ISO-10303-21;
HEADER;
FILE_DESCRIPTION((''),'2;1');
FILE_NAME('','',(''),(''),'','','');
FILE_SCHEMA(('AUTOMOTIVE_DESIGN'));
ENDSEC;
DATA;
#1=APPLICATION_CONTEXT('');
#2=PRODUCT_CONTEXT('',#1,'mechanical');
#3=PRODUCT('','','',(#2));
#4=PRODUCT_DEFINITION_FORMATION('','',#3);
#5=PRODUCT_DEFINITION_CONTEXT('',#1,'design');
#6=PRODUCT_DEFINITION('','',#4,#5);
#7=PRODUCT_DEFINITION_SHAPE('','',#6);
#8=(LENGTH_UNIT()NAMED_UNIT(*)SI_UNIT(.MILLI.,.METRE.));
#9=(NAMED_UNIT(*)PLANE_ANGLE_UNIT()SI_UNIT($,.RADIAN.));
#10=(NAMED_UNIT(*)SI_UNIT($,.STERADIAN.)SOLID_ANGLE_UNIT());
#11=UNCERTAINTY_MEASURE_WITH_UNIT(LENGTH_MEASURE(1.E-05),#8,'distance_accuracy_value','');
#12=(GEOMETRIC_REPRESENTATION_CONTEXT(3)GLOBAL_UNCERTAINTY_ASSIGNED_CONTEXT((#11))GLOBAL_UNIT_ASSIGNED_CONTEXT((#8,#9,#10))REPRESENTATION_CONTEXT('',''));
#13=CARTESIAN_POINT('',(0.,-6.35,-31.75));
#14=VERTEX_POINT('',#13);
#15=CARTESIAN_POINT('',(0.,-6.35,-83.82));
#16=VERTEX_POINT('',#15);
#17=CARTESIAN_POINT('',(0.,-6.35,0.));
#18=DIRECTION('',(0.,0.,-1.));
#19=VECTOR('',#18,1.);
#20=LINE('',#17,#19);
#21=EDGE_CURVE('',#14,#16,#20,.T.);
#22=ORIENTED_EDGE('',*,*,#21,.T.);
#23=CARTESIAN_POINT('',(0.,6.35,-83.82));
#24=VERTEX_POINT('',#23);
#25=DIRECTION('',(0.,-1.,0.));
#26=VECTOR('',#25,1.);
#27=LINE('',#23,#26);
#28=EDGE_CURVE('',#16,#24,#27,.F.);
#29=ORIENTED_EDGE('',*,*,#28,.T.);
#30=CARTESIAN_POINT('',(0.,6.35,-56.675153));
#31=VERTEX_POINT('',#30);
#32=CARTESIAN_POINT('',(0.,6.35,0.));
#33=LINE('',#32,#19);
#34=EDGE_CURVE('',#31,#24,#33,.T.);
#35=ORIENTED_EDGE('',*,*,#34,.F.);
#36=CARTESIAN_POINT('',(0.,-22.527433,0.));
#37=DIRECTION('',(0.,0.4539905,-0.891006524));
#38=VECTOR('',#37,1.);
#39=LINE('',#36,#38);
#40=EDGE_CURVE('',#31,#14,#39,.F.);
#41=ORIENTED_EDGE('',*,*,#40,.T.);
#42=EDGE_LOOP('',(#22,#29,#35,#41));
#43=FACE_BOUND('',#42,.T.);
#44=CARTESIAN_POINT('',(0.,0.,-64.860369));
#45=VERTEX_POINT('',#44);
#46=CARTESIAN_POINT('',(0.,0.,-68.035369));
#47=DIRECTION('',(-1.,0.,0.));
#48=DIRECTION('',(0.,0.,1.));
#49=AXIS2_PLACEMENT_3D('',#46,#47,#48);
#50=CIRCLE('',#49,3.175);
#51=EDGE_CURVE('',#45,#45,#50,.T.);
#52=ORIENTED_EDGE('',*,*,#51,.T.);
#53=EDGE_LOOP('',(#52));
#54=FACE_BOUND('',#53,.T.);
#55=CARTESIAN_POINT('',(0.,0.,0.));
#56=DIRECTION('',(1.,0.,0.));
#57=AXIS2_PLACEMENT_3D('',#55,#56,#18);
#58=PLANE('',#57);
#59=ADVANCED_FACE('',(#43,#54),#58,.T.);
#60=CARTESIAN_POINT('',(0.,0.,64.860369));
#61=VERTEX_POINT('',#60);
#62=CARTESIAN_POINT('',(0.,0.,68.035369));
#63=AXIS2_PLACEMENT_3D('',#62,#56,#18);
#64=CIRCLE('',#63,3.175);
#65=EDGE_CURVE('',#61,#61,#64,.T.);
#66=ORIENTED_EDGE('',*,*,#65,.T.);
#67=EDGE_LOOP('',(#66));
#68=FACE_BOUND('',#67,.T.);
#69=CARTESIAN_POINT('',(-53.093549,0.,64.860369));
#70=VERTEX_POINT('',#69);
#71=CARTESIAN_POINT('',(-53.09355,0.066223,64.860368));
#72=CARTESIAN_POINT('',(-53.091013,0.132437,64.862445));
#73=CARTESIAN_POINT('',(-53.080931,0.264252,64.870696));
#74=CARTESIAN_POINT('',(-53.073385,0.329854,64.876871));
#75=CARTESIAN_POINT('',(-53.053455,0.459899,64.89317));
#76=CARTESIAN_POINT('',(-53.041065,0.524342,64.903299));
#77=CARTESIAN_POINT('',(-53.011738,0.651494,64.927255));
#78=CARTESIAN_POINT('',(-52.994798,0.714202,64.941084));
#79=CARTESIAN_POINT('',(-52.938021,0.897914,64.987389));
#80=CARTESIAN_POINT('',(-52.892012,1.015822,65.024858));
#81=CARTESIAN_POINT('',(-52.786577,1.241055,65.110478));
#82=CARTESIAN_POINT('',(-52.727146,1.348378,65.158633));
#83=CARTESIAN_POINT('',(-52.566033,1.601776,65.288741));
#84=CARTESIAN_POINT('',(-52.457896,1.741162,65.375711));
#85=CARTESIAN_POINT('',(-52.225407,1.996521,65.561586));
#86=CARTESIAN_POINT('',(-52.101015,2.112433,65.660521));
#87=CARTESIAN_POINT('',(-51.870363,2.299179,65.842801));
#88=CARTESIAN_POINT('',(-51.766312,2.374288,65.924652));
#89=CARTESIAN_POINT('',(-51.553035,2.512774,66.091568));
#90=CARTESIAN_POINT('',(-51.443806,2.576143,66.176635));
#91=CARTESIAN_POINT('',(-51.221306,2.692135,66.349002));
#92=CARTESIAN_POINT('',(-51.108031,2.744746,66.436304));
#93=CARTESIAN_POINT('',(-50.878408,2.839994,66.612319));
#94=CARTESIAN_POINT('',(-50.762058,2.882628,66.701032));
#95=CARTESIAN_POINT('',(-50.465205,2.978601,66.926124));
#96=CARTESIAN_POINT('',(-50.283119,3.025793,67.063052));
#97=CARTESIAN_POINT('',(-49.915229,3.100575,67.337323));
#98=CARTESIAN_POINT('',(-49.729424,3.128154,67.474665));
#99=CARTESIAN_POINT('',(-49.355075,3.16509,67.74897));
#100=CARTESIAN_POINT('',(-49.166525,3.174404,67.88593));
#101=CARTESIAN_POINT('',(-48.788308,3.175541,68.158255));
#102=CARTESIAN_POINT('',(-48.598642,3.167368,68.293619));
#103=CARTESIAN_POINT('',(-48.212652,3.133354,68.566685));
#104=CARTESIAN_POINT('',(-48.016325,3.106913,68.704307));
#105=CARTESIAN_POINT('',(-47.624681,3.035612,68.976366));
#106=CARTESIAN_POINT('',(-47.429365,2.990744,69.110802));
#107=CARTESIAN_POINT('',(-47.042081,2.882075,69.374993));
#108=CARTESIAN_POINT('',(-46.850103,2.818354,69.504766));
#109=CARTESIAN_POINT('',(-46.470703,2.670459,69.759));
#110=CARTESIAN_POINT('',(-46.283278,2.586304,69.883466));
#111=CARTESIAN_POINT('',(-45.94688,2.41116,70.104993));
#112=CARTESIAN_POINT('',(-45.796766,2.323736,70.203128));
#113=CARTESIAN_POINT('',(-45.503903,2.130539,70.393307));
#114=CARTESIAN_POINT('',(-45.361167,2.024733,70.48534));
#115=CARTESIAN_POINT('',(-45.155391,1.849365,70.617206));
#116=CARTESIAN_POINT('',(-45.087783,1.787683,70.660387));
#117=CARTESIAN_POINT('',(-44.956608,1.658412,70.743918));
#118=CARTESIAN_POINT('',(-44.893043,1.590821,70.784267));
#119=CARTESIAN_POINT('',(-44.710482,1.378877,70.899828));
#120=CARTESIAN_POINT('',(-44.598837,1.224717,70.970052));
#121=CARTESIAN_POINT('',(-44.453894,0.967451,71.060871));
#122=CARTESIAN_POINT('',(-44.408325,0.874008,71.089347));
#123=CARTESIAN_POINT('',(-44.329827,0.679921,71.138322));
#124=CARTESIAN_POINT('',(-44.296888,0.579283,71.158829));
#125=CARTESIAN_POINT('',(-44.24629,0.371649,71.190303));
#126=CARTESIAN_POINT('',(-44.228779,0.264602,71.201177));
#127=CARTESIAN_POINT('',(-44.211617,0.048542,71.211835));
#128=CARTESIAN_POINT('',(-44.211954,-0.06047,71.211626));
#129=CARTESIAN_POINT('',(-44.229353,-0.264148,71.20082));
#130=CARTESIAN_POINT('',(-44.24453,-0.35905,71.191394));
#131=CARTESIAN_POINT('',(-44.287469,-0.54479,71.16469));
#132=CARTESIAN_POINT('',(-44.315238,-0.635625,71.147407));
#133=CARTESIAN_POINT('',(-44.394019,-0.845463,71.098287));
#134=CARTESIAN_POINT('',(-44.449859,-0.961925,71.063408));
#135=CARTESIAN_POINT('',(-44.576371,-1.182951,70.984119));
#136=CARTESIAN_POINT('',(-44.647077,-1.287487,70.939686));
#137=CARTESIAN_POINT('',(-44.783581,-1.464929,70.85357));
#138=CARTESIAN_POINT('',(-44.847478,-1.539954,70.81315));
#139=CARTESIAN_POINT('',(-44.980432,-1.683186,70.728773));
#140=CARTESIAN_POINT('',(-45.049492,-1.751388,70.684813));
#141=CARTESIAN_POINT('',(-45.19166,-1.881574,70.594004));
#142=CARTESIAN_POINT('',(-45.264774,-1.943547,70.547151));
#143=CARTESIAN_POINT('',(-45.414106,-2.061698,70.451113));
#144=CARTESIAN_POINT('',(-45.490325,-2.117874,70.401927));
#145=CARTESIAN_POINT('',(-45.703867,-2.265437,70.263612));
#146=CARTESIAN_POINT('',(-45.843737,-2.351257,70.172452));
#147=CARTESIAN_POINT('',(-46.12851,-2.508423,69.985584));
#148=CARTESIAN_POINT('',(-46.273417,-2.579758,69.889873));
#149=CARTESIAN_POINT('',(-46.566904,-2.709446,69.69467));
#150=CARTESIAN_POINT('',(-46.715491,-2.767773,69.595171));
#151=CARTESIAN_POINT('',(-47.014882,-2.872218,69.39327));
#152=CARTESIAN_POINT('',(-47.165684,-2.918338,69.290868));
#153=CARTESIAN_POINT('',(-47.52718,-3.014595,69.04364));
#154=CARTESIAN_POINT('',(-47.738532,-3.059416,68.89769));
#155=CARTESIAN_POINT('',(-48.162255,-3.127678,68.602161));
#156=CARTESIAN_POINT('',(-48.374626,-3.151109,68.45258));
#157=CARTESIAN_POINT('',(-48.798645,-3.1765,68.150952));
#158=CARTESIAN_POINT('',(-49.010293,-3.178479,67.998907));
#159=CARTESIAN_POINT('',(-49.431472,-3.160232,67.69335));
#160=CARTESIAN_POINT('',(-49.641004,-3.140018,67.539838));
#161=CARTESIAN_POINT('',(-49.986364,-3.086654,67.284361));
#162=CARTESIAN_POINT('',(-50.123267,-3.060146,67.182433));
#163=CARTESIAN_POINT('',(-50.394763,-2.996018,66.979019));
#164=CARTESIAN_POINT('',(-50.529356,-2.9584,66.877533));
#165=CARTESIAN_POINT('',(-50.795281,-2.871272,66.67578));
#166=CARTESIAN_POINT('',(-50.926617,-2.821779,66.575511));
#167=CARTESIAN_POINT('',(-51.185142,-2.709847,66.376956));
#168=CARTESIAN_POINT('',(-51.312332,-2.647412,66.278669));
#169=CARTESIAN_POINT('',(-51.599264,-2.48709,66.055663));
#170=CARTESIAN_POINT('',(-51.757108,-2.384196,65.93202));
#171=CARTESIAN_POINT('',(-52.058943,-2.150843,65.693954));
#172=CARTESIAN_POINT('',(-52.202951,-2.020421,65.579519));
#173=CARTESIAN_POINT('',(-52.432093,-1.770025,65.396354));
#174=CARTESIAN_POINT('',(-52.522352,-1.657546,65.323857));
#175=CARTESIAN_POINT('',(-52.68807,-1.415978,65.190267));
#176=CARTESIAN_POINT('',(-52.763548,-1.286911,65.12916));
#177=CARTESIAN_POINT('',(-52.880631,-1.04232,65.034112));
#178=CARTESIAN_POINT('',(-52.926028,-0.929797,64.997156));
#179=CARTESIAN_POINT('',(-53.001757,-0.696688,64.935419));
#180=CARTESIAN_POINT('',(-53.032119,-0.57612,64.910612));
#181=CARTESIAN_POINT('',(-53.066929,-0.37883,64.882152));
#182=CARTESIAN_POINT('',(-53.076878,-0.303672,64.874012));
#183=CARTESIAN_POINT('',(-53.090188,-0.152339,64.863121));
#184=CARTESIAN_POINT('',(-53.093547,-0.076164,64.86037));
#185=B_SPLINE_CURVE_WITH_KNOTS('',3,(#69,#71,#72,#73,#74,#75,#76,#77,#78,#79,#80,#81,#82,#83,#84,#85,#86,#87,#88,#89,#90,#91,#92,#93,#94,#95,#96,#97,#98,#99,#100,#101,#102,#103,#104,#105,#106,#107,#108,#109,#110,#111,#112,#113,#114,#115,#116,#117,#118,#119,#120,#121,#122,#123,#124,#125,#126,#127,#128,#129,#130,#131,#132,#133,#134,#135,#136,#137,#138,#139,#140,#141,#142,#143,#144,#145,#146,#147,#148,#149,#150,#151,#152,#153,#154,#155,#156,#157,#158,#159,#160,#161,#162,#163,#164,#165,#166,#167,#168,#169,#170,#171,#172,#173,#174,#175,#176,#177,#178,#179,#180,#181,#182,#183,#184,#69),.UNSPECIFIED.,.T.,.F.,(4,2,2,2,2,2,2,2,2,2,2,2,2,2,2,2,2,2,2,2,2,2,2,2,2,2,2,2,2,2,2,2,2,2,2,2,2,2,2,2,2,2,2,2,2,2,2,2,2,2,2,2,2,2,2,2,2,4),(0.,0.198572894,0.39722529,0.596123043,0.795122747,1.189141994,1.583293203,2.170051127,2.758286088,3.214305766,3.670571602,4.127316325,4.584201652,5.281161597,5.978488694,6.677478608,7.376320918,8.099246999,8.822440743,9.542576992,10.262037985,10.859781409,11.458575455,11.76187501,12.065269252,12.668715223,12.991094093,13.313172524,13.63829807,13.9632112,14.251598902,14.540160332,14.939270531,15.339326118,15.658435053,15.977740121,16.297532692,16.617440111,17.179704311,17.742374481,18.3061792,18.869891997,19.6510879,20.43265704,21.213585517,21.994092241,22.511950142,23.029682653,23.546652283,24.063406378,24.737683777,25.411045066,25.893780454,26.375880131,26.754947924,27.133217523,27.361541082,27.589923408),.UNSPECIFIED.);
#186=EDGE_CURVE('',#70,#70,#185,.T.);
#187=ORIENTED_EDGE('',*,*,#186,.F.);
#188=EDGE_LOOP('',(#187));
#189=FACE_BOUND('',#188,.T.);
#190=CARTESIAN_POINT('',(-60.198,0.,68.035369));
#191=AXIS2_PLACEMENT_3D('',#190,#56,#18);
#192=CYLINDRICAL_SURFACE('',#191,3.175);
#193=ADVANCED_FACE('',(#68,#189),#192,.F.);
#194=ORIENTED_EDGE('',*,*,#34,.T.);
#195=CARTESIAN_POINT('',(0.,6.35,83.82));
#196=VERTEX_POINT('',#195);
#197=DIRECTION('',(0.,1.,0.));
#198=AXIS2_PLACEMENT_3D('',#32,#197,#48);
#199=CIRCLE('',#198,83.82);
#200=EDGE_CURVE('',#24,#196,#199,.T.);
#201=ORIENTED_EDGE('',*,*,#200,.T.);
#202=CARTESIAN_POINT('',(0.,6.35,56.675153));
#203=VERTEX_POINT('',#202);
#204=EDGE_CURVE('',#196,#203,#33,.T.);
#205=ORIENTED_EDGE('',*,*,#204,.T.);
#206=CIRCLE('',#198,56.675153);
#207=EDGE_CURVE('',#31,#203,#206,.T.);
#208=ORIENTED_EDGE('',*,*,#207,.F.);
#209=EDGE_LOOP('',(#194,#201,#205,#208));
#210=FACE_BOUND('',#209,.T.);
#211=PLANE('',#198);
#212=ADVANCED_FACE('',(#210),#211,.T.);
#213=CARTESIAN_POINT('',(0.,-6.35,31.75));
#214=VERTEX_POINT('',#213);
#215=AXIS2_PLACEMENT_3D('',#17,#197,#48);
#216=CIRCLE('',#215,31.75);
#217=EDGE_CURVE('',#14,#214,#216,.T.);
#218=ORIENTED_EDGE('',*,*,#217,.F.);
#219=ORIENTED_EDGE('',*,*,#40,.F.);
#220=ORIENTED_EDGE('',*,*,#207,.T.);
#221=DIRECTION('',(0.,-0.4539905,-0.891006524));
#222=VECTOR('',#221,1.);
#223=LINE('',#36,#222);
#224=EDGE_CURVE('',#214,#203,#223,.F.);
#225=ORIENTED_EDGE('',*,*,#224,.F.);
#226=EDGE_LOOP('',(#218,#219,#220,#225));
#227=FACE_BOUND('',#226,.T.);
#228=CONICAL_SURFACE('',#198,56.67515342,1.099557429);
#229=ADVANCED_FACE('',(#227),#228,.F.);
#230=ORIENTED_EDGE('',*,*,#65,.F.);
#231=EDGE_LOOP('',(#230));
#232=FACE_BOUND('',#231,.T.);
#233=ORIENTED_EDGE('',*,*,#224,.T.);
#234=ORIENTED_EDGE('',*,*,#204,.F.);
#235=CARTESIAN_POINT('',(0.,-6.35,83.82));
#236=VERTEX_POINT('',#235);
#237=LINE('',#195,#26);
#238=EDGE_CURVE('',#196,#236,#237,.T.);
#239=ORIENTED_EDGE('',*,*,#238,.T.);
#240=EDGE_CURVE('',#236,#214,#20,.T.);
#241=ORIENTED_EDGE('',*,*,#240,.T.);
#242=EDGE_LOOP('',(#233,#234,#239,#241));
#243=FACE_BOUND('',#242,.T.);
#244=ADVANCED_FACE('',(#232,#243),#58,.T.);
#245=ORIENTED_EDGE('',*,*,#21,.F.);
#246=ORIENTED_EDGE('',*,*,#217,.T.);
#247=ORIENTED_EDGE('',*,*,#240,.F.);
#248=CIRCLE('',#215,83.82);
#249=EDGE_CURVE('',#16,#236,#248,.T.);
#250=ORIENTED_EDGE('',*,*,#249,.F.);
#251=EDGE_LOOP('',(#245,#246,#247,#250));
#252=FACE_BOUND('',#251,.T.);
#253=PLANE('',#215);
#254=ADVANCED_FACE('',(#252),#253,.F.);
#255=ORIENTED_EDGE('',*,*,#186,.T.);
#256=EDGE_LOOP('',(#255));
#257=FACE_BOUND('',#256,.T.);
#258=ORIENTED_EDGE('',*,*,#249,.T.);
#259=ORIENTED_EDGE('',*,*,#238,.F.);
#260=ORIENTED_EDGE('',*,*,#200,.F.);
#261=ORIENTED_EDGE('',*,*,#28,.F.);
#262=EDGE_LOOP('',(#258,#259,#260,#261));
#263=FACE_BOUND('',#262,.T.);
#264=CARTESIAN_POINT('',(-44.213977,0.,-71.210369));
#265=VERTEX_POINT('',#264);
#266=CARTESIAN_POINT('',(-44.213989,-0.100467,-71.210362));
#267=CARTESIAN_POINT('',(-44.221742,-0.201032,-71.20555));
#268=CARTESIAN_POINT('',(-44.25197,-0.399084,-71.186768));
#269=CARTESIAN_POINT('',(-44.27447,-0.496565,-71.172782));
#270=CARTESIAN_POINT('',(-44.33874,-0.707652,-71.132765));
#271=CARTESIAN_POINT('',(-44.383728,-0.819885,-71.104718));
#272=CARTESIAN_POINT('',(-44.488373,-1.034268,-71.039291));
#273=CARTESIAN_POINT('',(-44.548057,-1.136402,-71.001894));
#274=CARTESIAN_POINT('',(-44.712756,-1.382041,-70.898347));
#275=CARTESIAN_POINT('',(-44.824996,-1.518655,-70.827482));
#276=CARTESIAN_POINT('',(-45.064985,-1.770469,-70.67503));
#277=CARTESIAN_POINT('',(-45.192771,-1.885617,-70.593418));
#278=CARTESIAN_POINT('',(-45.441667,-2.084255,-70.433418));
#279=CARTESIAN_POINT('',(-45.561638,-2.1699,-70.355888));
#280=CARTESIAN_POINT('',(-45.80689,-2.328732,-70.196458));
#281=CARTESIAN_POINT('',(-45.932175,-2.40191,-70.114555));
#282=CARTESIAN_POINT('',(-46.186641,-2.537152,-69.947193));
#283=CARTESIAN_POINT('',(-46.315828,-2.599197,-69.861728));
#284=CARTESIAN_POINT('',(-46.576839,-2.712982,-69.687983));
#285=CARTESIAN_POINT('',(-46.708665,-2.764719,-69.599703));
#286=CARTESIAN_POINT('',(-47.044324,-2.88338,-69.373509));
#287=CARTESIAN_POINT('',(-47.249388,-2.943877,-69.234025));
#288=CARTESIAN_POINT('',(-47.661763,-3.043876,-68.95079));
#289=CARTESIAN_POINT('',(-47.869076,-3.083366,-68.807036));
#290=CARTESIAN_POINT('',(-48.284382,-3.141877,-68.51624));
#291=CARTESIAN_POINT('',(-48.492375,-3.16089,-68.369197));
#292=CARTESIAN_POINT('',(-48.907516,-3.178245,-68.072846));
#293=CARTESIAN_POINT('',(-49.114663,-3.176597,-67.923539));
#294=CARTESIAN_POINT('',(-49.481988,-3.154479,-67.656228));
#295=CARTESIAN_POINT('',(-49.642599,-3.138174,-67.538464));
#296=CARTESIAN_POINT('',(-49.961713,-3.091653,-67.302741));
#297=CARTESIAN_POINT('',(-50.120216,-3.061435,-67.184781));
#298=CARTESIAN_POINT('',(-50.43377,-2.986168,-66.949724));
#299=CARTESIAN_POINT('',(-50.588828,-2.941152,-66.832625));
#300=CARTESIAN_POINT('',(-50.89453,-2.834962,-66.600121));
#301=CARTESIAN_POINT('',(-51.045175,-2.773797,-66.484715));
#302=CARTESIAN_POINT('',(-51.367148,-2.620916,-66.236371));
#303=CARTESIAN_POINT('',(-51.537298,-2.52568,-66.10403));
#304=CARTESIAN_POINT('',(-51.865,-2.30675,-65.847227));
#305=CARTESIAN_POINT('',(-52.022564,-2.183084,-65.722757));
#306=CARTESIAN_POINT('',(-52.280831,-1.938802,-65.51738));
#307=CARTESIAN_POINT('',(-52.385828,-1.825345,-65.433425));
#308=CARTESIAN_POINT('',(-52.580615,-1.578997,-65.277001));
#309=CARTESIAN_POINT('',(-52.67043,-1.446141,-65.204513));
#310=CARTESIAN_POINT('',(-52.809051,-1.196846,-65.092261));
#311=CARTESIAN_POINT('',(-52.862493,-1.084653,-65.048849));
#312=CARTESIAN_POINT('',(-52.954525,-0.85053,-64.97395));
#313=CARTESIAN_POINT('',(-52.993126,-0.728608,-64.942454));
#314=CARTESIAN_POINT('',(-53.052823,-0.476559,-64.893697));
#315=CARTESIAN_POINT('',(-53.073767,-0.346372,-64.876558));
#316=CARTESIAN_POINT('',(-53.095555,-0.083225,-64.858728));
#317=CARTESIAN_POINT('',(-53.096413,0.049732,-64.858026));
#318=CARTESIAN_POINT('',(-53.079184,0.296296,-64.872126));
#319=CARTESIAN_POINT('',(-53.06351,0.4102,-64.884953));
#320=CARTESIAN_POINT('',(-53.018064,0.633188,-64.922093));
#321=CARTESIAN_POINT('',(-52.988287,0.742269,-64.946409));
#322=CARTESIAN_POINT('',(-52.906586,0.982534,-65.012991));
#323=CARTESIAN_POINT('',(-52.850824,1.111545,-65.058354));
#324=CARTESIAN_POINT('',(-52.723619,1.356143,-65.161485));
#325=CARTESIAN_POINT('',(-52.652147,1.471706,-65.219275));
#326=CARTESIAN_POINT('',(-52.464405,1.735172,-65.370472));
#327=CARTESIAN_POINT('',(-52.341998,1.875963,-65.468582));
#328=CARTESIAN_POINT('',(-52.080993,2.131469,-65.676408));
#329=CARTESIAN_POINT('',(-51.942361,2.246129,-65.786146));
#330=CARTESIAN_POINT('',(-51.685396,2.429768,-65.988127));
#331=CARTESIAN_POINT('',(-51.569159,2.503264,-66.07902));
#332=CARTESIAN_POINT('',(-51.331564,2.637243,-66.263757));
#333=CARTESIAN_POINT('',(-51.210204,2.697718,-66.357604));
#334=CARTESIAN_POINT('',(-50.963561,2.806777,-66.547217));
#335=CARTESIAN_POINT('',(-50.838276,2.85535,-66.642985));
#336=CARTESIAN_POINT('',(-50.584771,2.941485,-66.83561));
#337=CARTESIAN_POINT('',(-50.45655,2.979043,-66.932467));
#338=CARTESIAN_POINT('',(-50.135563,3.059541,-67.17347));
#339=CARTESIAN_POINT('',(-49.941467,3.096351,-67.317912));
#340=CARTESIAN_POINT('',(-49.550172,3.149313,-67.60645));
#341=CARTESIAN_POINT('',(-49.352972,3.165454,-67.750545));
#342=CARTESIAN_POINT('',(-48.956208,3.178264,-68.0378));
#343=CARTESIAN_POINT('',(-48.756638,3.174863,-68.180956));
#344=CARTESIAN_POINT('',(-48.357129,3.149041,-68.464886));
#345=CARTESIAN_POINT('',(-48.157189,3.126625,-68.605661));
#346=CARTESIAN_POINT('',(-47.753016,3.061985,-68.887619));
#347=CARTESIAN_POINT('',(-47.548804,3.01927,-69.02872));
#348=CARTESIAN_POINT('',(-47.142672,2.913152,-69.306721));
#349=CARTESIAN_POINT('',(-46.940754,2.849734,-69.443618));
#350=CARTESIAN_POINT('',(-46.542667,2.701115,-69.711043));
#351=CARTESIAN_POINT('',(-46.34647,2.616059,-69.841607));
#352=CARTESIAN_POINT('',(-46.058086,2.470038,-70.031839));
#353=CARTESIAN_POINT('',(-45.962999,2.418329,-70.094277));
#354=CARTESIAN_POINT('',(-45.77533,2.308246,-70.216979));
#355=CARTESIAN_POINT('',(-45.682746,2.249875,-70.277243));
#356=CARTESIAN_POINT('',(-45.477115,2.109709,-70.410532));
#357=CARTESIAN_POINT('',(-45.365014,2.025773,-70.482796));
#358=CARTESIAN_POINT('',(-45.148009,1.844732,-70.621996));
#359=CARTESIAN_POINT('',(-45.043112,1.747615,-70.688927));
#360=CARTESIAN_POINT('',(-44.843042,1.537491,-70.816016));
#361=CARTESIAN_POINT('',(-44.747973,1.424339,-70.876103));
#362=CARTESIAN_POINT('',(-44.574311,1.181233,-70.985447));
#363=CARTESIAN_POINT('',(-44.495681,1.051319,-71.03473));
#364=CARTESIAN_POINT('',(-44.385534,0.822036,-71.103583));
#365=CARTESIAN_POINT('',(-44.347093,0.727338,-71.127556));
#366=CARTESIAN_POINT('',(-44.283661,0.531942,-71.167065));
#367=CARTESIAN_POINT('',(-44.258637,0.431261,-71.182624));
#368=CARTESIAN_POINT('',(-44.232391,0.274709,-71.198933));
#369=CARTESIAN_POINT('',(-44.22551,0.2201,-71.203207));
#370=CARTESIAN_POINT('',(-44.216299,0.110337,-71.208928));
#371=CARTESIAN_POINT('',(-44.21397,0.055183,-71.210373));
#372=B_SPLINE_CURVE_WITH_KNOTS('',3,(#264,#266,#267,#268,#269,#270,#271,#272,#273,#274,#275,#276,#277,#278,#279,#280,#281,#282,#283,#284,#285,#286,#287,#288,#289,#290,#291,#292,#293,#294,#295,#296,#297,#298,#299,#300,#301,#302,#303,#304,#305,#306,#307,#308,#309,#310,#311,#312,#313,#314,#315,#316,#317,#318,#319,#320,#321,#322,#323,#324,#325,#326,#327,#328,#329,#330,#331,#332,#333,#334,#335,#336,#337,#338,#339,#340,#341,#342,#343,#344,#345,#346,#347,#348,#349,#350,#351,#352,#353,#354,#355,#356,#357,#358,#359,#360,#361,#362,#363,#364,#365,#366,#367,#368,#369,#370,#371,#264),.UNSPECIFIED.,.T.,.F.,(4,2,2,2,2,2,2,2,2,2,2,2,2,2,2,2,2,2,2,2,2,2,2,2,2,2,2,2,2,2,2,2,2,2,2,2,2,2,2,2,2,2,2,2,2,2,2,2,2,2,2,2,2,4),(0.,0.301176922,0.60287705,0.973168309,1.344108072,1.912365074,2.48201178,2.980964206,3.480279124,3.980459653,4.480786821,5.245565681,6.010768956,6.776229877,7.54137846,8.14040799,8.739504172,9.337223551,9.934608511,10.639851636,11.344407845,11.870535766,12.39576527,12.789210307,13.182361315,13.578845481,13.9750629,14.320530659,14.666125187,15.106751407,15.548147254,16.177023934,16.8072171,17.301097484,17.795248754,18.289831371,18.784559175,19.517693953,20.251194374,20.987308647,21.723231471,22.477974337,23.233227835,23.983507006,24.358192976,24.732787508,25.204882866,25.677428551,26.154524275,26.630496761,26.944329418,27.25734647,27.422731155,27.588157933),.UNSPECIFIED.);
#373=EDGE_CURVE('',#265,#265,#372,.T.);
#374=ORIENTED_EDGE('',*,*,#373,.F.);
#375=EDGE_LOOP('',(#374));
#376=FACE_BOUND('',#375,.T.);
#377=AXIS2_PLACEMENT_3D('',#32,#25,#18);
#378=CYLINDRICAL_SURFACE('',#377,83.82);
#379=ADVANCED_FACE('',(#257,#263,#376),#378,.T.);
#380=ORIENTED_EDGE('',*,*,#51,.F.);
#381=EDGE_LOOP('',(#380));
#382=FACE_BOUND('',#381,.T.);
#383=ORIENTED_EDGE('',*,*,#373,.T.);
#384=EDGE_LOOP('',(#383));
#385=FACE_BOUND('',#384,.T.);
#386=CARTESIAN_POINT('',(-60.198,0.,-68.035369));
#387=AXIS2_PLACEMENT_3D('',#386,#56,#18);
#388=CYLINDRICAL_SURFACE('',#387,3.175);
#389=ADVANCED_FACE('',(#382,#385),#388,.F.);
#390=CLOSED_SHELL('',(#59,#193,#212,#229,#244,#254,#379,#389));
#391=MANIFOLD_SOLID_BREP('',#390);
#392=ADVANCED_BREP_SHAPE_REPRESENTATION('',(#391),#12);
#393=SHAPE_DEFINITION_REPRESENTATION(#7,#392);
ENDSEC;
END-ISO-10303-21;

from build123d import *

# Parameters (mm, degrees)
STOCK_NOS_TANK_PLATE_SUPPORT_VALVE_1_ANGLE = 180
SKETCH4_R                                  = 3.175
CUT_EXTRUDE2_DEPTH                         = 60.198


# Read off the part's stored shape, not the designer's step: Stock-Nos Tank Plate Support Valve-1
with BuildPart() as part:
    # Stock-Nos Tank Plate Support Valve-1 out → Stock-Nos Tank Plate Support Valve-1 (revolve)
    with BuildSketch(Plane(origin=(0, 0, 0), x_dir=(0, 0, -1), z_dir=(1, 0, 0))):
        Polygon((83.82, 6.35), (56.67515342, 6.35), (31.75, -6.35), (83.82, -6.35), align=None)
    revolve(axis=Axis((0, 0, 0), (0, 1, 0)), revolution_arc=STOCK_NOS_TANK_PLATE_SUPPORT_VALVE_1_ANGLE)

    # Sketch4 → Cut-Extrude2 (cut)
    with BuildSketch(Plane(origin=(0, 0, 0), x_dir=(0, 0, -1), z_dir=(1, 0, 0))):
        with Locations((-68.035369102, 0)):
            Circle(SKETCH4_R)
    cut_extrude2 = extrude(amount=-CUT_EXTRUDE2_DEPTH, mode=Mode.SUBTRACT)

    # Mirror1: Cut-Extrude2 across plane
    add(cut_extrude2.mirror(Plane.XY), mode=Mode.SUBTRACT)


solid = part.part
